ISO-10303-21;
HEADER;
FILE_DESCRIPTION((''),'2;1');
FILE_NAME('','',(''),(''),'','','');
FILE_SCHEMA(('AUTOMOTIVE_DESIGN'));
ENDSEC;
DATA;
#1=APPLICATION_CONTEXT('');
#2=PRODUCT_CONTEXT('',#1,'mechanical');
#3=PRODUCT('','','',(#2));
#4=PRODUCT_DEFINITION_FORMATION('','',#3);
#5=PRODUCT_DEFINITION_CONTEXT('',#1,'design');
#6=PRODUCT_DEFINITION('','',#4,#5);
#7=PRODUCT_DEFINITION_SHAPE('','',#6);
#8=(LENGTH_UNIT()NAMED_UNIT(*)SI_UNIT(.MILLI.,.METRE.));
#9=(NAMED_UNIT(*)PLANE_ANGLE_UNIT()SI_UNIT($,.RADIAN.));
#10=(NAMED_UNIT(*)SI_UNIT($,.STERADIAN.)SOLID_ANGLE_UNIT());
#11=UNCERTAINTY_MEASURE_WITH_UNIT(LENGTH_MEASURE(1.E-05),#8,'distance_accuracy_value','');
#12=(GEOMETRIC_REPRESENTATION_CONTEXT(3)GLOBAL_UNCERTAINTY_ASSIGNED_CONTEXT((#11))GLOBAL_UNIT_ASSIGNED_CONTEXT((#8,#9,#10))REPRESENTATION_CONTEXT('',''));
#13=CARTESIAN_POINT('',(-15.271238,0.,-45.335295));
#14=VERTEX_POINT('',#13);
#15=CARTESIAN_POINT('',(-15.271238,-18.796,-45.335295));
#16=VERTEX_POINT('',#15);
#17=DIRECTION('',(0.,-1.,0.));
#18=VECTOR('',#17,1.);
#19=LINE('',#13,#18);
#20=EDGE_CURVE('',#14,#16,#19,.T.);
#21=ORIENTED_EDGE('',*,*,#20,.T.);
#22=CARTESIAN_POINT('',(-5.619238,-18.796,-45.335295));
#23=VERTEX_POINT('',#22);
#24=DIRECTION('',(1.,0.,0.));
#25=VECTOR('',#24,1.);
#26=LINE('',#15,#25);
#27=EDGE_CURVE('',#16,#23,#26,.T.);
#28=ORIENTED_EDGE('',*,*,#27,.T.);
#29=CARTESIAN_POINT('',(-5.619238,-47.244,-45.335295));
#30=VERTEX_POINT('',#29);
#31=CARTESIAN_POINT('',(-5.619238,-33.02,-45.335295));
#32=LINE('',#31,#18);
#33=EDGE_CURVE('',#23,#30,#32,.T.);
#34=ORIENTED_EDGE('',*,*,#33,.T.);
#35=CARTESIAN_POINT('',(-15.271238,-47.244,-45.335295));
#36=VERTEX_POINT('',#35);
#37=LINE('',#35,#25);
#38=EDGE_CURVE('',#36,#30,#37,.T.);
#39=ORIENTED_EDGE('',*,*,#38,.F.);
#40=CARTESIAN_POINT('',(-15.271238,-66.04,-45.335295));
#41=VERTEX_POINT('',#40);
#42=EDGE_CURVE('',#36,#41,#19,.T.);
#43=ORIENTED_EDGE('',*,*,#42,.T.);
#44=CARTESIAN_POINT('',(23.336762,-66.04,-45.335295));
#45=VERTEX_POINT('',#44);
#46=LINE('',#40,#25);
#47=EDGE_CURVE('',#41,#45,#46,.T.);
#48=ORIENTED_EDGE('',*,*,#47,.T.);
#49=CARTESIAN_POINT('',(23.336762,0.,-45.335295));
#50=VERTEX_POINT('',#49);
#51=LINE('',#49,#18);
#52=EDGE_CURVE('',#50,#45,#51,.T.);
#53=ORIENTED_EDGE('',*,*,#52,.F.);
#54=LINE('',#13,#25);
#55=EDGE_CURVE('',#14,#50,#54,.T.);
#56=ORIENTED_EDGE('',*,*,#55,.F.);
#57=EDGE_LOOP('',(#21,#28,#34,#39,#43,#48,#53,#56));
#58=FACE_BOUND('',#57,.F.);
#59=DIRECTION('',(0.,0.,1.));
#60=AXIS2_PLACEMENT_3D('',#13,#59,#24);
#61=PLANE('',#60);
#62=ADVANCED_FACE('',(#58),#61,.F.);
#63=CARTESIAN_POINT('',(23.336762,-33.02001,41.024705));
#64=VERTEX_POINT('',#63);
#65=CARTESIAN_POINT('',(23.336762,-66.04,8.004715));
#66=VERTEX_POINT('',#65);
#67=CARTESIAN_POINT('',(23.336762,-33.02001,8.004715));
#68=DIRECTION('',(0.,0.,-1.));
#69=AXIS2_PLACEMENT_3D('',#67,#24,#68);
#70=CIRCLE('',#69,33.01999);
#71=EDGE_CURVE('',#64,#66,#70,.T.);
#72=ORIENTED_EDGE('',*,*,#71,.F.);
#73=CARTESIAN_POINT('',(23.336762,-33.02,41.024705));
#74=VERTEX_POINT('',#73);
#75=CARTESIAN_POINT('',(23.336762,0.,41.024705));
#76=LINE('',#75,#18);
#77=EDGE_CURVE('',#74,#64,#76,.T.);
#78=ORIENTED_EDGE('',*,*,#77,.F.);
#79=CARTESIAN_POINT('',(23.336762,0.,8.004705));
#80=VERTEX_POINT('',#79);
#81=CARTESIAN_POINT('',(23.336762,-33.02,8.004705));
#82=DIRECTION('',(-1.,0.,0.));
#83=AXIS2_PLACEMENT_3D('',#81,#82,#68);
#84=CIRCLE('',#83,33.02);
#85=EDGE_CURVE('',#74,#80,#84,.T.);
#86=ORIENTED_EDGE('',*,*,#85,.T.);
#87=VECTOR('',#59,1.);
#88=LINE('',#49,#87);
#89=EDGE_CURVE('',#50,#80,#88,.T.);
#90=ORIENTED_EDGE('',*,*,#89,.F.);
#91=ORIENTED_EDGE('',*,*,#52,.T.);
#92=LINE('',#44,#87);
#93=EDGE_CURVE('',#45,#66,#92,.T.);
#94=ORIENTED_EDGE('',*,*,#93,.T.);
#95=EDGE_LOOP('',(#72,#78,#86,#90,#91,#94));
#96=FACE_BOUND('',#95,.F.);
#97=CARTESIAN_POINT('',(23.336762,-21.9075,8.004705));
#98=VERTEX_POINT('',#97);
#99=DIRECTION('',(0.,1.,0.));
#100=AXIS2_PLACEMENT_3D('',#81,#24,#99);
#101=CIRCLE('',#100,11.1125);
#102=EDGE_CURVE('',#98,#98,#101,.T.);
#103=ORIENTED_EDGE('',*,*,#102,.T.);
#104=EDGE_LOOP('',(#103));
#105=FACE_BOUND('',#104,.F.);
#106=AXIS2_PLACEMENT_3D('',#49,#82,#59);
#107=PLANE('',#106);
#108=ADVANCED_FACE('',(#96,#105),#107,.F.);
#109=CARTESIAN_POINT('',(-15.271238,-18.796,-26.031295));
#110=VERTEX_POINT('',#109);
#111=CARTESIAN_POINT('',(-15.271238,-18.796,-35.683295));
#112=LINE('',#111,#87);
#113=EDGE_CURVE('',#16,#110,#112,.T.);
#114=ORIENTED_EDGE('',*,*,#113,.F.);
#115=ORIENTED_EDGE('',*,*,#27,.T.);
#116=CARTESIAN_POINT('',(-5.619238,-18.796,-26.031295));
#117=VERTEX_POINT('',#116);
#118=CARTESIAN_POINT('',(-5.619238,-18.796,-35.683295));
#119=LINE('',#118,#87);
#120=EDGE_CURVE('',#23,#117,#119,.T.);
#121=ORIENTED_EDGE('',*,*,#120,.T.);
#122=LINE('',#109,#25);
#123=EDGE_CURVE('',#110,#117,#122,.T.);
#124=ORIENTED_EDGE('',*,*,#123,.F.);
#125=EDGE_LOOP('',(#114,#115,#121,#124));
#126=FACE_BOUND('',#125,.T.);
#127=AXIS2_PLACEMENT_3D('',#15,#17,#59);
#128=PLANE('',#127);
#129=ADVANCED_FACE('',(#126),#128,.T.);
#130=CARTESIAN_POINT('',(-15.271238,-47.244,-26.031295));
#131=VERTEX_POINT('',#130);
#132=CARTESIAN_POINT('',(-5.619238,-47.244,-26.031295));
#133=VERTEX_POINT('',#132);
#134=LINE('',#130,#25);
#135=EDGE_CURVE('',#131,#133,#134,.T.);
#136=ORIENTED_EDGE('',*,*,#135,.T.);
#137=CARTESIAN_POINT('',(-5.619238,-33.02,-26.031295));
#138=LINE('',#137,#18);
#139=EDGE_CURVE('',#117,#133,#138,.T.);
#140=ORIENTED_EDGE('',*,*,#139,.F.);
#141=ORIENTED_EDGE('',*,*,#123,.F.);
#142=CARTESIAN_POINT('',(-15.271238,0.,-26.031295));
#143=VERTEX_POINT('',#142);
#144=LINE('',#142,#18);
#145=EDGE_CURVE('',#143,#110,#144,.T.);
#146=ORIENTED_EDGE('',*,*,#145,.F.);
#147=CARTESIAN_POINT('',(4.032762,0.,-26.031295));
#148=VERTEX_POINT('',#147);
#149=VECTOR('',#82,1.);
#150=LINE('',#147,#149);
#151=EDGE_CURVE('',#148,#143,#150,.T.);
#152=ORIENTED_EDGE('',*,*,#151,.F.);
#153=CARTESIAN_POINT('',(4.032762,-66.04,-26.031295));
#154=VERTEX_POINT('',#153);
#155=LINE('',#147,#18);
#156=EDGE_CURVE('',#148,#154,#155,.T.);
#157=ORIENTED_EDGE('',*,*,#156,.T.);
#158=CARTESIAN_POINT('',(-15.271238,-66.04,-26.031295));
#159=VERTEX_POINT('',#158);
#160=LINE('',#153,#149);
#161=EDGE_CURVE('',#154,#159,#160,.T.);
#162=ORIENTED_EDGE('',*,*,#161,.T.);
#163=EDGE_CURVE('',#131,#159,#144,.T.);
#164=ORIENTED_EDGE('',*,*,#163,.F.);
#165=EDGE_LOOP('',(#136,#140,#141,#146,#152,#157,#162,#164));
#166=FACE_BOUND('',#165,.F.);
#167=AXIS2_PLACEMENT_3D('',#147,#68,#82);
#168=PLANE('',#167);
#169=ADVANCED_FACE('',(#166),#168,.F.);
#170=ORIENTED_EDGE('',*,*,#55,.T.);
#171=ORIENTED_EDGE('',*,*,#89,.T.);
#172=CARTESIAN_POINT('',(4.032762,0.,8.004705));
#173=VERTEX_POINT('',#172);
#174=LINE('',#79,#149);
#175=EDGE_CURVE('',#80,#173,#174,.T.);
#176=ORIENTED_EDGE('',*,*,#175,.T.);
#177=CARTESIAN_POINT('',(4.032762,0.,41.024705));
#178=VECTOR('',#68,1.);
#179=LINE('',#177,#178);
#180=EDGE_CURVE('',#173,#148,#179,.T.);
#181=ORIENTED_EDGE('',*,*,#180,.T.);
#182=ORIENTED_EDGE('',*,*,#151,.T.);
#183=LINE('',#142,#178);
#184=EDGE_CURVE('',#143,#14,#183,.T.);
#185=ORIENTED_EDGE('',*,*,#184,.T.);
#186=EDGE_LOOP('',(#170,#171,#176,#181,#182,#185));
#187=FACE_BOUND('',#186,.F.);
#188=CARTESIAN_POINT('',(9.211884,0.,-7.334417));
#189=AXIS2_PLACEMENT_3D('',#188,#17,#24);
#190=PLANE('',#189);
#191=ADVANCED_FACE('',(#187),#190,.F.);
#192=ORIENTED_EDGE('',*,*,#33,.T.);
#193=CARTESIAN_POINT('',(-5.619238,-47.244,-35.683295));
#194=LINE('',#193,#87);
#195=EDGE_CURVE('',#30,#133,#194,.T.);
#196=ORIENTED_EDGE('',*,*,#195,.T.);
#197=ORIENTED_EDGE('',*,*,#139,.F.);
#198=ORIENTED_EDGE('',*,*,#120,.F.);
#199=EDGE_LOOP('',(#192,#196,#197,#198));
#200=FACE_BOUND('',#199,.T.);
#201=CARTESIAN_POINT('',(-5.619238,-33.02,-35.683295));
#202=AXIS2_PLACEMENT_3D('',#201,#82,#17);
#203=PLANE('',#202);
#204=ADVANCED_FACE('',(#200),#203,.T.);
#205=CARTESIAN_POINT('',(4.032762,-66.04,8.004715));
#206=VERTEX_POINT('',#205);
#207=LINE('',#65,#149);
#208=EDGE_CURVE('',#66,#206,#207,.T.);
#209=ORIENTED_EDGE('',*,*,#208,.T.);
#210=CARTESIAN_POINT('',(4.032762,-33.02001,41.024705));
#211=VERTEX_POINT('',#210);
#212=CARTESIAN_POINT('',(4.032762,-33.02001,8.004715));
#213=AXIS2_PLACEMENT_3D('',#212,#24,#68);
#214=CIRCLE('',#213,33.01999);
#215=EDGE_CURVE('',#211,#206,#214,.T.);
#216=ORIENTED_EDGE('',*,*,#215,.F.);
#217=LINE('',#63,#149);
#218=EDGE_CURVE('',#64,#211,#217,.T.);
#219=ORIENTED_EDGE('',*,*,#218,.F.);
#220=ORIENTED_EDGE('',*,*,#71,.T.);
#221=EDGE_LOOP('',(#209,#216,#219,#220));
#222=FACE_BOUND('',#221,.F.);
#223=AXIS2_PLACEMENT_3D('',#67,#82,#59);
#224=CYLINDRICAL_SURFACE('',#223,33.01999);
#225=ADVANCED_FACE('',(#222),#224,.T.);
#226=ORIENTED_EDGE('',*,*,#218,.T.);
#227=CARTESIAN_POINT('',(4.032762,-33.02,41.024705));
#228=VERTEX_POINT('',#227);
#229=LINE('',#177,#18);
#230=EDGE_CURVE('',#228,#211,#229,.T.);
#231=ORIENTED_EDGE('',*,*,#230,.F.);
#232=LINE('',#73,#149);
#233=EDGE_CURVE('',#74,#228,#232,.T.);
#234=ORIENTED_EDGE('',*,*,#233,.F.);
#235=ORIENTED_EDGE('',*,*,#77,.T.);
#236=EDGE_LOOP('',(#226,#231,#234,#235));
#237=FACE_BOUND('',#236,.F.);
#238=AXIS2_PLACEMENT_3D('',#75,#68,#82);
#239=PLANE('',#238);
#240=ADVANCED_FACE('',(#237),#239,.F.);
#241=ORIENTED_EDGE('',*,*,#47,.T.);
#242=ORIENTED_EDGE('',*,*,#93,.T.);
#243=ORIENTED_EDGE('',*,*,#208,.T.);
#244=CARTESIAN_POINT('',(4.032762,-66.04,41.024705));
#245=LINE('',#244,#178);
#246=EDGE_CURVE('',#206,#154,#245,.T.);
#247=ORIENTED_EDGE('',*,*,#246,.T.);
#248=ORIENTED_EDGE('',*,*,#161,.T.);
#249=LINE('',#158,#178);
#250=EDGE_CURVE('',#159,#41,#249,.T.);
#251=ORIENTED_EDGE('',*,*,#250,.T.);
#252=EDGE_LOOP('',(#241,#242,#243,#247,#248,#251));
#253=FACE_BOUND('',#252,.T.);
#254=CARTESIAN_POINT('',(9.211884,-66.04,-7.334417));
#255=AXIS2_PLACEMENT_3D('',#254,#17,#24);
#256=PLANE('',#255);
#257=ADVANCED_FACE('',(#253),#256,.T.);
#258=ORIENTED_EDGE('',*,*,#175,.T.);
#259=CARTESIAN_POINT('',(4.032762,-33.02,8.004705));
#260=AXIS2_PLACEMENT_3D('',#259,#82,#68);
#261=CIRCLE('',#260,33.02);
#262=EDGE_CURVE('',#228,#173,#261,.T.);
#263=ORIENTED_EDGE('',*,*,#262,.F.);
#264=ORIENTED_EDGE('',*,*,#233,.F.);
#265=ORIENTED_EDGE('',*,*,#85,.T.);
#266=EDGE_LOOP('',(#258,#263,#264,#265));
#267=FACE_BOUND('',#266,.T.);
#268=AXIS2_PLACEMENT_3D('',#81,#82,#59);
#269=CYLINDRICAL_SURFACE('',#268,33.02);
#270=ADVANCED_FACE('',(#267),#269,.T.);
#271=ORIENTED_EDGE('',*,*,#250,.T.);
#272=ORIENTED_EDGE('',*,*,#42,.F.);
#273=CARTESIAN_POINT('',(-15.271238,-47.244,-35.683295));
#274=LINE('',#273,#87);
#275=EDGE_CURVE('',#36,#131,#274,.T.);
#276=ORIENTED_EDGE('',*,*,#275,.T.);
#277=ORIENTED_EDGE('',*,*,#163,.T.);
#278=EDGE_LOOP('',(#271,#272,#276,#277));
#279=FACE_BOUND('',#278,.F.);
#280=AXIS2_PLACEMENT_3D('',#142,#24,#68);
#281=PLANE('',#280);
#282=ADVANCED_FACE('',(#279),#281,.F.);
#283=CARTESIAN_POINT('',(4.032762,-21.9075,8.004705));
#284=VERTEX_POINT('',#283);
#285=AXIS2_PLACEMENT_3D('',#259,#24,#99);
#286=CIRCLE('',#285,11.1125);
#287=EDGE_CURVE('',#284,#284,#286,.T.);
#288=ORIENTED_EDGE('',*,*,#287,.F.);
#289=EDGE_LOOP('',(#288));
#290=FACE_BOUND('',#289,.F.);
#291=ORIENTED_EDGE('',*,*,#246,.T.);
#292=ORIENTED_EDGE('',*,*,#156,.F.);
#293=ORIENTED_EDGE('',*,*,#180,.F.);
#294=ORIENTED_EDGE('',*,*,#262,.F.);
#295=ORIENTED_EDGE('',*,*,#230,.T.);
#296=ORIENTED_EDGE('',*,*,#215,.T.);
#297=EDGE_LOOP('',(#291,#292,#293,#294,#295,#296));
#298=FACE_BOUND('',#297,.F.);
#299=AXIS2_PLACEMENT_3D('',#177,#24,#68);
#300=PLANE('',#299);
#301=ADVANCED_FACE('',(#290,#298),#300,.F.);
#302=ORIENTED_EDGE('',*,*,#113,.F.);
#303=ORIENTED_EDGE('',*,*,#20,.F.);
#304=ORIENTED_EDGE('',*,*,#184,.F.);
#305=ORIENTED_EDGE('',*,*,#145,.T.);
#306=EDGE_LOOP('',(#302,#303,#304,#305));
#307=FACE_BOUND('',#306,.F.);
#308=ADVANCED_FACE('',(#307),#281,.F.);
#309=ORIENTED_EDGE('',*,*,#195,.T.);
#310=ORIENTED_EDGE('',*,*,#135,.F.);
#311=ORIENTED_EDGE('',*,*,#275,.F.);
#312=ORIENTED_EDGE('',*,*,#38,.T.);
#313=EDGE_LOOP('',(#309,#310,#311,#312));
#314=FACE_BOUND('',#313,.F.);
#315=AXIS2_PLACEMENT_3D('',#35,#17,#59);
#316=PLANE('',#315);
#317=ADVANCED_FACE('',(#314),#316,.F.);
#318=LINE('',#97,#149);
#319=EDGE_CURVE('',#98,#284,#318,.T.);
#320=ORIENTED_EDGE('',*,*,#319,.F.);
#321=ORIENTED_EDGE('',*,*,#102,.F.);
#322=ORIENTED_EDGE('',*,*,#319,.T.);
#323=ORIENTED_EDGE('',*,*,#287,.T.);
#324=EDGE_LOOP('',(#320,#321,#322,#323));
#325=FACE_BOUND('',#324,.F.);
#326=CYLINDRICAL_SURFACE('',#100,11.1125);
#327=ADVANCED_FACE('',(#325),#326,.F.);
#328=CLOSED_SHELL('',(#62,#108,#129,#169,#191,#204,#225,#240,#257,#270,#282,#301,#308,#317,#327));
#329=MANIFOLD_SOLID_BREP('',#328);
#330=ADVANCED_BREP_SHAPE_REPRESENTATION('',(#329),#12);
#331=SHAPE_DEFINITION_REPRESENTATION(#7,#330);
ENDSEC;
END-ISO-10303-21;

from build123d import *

# Parameters (mm, degrees)
F1_DEPTH = 66.04
F2_R     = 33.02
F3_R     = 33.01999
F4_W     = 28.448
F4_H     = 19.304
F5_DEPTH = 9.652
F6_R     = 11.1125
F7_DEPTH = 19.304


# Not quite as in the source:
# - a fillet or chamfer is up to 0.001 mm smaller than in the source, because OpenCascade refuses the exact size


with BuildPart() as f1:
    # F0 (on Front) → F1 (new body)
    with BuildSketch(Plane.XZ):
        Polygon((23.3367617899, 41.0247054291), (4.0327617899, 41.0247054291), (4.0327617899, -26.0312945709), (-15.2712382101, -26.0312945709), (-15.2712382101, -45.3352945709), (23.3367617899, -45.3352945709), align=None)
    extrude(amount=F1_DEPTH)

    # F2
    f2_edges = [f1.edges().sort_by_distance(p)[0] for p in [
        (13.684762, 0, 41.024705),
    ]]
    fillet(f2_edges, radius=F2_R)

    # F3 (radius 33.02 in the source; OpenCascade refuses exactly that, so slightly less here)
    f3_edges = [f1.edges().sort_by_distance(p)[0] for p in [
        (13.684762, -66.04, 41.024705),
    ]]
    fillet(f3_edges, radius=F3_R)

    # F4 (on face) → F5 (cut)
    with BuildSketch(Plane(origin=(-15.2712382101, 0, 0), x_dir=(0, -1, 0), z_dir=(-1, 0, 0))):
        with Locations((33.02, -35.6832945709)):
            Rectangle(F4_W, F4_H)
    extrude(amount=-F5_DEPTH, mode=Mode.SUBTRACT)

    # F6 (on face) → F7 (cut)
    with BuildSketch(Plane.YZ.offset(23.3367617899)):
        with Locations((-33.02, 8.0047054291)):
            Circle(F6_R)
    extrude(amount=-F7_DEPTH, mode=Mode.SUBTRACT)


solid = f1.part
